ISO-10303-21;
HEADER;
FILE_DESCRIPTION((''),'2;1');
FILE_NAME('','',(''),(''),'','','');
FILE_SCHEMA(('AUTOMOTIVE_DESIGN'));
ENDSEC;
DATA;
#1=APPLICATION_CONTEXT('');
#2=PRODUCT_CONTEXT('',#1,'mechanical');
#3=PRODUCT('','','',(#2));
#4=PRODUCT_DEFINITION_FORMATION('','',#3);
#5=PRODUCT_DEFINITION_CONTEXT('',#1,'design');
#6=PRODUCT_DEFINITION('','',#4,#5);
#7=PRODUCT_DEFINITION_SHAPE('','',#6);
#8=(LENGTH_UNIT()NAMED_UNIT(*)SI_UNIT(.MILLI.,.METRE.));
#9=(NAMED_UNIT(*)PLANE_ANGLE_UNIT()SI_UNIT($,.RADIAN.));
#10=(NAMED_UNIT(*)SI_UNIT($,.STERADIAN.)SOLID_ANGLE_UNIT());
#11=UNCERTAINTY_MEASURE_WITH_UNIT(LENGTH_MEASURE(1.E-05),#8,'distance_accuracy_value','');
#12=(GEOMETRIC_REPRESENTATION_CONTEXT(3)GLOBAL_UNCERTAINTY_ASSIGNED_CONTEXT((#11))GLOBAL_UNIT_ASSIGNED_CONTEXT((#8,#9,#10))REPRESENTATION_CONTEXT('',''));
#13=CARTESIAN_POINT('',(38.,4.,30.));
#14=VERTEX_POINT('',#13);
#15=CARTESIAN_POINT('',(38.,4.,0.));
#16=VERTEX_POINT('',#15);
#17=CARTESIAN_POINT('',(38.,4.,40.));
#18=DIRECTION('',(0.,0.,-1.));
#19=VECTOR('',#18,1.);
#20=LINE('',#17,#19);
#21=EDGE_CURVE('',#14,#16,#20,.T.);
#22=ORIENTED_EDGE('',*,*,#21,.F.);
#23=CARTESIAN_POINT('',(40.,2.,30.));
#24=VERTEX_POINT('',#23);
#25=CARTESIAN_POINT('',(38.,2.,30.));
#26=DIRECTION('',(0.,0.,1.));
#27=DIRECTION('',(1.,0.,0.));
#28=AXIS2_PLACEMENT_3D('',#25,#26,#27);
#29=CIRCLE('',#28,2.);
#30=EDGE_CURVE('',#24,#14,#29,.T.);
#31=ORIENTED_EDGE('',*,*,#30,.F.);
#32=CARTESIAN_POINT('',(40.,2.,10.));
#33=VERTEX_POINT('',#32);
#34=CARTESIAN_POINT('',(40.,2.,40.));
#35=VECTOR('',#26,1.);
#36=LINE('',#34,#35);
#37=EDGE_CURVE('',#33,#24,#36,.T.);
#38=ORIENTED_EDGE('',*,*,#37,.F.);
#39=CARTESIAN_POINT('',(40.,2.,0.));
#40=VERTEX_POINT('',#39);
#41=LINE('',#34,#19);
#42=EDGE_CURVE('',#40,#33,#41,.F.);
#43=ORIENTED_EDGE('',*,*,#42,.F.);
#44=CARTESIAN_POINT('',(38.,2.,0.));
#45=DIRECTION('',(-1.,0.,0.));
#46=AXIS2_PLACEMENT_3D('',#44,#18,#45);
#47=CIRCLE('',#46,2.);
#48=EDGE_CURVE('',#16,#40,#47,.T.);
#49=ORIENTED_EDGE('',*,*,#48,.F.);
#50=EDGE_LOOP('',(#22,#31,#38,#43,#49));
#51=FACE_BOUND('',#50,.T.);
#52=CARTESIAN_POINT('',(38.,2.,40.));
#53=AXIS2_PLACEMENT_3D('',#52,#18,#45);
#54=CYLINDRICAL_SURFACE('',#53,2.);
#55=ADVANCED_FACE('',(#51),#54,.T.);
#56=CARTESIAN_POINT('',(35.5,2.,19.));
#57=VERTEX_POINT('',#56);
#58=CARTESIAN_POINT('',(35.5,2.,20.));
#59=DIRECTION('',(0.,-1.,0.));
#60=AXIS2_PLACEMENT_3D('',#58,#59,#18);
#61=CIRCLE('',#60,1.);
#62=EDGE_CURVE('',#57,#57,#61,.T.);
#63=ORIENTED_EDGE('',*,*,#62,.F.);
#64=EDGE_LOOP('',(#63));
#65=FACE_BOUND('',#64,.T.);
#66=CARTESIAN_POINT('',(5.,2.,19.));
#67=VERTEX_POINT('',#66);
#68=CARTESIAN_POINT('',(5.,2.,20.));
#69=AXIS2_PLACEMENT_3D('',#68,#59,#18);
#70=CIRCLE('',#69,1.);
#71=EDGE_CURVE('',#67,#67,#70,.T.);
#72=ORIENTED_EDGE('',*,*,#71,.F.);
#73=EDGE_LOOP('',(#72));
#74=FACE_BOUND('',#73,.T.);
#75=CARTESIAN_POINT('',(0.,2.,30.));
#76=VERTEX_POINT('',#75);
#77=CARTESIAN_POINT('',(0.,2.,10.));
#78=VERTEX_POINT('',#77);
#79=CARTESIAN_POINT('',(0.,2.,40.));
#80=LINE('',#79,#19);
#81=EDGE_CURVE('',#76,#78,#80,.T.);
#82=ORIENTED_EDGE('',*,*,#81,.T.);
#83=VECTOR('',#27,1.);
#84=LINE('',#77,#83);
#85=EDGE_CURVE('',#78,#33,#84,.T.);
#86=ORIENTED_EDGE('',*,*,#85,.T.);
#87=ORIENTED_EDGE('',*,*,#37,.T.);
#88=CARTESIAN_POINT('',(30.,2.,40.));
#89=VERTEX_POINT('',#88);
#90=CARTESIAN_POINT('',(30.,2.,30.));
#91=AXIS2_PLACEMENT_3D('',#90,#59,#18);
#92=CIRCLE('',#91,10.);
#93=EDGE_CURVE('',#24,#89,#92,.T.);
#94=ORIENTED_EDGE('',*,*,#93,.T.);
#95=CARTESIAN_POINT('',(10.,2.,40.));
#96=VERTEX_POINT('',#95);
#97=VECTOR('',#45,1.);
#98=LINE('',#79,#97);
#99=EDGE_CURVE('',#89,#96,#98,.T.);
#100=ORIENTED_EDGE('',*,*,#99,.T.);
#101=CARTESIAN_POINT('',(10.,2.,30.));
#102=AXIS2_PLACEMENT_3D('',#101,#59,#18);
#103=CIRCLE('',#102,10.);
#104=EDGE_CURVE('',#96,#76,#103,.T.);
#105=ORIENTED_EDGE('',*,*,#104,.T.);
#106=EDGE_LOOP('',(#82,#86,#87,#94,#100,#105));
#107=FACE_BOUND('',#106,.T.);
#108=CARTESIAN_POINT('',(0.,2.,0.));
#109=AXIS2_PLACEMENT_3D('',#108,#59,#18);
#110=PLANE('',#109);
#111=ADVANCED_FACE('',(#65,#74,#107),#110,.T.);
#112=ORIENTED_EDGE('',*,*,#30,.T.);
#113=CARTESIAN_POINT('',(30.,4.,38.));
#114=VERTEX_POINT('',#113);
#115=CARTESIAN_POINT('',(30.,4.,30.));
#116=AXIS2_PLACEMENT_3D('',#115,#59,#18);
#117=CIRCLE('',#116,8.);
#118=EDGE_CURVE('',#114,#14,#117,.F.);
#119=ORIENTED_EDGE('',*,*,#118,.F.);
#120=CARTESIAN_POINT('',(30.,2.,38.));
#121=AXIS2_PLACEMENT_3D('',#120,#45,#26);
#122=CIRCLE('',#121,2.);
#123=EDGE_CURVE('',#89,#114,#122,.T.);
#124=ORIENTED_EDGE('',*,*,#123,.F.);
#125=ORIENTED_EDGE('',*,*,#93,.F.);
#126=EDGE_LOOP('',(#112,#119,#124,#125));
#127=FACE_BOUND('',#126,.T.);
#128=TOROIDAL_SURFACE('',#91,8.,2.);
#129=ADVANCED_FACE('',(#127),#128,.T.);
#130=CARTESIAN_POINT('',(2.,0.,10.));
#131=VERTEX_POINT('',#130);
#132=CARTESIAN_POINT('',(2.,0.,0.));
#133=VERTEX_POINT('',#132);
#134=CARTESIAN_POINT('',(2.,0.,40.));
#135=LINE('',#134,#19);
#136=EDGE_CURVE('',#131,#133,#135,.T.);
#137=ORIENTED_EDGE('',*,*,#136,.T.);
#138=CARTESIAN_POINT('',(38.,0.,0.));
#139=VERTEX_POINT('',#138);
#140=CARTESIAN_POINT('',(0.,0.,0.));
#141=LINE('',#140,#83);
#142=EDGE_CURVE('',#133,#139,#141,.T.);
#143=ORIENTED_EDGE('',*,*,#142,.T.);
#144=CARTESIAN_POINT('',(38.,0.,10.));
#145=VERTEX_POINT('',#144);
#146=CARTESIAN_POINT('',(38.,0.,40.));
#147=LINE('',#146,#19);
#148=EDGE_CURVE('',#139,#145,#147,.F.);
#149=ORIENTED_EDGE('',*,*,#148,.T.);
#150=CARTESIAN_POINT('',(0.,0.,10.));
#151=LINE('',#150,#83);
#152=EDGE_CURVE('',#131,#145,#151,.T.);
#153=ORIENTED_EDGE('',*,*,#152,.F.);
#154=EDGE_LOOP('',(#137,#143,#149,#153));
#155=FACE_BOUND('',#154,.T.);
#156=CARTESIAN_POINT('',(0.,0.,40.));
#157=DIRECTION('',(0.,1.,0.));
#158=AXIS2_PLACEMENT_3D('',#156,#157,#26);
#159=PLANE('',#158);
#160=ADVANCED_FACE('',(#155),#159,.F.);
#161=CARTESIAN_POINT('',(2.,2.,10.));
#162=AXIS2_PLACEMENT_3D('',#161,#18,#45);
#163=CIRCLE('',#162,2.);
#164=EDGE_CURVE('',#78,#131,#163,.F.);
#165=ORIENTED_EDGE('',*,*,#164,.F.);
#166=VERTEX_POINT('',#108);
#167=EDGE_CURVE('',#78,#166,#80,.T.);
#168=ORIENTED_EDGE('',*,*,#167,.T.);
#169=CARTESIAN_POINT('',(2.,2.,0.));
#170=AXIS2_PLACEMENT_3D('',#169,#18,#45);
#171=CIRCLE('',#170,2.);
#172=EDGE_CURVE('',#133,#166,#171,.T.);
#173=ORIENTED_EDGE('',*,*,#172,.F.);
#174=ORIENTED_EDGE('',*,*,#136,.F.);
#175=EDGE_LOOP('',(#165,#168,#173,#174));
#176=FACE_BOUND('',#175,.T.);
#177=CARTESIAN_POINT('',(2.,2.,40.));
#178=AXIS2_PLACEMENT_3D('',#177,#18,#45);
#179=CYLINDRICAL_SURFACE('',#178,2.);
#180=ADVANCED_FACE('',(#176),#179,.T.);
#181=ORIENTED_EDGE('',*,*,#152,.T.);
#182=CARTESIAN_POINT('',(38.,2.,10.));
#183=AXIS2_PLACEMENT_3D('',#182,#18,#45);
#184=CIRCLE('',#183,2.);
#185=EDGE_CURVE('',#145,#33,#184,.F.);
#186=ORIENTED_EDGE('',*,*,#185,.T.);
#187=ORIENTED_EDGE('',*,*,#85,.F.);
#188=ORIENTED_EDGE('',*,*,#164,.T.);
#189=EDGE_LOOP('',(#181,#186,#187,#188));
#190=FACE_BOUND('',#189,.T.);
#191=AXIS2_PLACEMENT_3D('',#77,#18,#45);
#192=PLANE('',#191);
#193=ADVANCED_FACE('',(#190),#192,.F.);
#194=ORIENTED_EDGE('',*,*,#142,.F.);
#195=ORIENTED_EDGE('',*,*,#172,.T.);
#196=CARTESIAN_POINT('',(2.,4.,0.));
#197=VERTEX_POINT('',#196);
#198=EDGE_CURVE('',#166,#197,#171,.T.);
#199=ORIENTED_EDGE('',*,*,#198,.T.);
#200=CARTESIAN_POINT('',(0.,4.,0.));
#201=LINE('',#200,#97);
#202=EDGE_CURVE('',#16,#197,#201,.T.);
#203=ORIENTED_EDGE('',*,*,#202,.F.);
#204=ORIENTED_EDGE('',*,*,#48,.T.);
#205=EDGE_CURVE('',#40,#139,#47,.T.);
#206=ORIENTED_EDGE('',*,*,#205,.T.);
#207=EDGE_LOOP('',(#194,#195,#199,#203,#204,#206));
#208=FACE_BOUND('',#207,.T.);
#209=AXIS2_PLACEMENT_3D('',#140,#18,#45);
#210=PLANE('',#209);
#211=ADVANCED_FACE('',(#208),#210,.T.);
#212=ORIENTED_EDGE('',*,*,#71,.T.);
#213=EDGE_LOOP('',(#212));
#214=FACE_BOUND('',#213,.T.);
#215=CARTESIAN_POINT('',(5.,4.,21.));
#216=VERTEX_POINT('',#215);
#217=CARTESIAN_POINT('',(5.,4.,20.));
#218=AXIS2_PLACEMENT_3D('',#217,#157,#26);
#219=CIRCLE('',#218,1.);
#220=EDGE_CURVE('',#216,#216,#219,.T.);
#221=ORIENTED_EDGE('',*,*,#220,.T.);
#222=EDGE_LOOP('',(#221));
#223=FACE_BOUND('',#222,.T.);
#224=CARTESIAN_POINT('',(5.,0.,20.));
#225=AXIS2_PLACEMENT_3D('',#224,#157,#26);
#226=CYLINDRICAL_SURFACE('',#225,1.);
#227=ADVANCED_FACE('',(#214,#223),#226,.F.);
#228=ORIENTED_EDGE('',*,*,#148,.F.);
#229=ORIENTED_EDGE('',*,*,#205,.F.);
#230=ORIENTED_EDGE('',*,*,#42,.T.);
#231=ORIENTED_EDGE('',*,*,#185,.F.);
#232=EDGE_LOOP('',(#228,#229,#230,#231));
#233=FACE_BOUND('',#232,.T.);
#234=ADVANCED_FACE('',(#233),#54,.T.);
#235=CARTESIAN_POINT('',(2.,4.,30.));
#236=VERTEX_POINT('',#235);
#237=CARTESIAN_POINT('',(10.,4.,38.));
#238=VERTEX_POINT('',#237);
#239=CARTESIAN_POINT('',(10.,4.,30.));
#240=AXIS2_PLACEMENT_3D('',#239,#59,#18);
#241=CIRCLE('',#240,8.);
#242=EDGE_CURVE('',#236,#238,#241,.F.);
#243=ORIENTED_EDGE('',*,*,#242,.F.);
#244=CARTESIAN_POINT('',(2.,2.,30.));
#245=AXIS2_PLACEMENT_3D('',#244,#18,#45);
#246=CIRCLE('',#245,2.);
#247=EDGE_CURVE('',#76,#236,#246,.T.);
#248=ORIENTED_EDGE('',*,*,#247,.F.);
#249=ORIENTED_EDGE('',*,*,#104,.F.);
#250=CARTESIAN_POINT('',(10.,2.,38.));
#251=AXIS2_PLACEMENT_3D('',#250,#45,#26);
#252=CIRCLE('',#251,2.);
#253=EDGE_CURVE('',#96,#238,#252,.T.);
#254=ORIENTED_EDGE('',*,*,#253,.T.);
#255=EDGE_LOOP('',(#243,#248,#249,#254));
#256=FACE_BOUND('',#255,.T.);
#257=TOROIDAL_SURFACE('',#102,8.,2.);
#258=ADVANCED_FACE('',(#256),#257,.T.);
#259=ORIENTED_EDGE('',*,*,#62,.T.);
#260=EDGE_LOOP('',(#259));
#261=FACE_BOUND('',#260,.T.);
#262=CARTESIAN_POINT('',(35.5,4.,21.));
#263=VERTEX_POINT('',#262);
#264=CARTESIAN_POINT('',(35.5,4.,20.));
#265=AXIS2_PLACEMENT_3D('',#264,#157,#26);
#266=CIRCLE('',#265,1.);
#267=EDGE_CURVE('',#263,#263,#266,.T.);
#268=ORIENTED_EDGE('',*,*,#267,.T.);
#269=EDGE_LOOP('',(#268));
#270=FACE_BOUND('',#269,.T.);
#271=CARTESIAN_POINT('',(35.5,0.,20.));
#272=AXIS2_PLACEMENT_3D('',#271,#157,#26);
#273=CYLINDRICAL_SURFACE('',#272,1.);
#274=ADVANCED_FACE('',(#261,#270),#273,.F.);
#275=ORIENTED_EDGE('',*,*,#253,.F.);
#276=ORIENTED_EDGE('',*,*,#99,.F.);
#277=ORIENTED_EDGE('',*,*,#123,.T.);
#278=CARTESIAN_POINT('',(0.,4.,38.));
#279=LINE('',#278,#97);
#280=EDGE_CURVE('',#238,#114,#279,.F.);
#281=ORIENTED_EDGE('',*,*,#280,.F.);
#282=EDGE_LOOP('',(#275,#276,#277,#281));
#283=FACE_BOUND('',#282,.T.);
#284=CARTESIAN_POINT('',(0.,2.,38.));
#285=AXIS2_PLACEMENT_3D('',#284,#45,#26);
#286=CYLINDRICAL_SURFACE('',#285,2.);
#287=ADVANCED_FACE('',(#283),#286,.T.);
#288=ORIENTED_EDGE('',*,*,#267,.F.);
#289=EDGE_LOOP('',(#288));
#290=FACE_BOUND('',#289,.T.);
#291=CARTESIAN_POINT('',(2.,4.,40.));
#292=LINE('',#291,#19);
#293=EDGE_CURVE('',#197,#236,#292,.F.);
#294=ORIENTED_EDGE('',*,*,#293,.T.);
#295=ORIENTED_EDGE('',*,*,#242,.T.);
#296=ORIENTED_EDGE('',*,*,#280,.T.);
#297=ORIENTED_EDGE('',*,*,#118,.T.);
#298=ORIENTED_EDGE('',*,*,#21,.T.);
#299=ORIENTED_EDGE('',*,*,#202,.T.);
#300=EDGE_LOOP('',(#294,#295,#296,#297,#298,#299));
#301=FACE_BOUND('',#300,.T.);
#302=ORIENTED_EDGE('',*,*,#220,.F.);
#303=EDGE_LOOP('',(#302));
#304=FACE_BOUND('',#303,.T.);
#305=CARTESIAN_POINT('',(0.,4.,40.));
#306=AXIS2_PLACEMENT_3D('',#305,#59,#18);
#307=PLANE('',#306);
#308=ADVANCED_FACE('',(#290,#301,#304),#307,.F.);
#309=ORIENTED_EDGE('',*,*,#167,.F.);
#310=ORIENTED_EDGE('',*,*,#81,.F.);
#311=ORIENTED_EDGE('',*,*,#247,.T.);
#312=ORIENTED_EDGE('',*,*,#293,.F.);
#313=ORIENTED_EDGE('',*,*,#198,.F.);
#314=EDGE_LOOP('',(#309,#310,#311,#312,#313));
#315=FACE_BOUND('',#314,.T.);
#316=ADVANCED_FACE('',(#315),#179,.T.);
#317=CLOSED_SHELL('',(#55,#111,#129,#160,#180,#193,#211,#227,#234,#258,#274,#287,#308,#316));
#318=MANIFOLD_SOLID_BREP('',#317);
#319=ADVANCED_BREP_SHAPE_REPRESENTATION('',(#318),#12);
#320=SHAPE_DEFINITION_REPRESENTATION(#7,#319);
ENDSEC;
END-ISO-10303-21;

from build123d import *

# Parameters (mm, degrees)
SKETCH_1_W          = 40
SKETCH_1_H          = 4
EXTRUDE_1_DEPTH     = 40
SKETCH_3_W          = 40
SKETCH_3_H          = 30
CUT_EXTRUDE_1_DEPTH = 2
SKETCH_4_R          = 1
CUT_EXTRUDE_2_DEPTH = 4
SKETCH_6_R          = 1
CUT_EXTRUDE_3_DEPTH = 4
FILLET_4_R          = 10
FILLET_5_R          = 10
FILLET_6_R          = 2
FILLET_7_R          = 2
FILLET_8_R          = 2


with BuildPart() as part:
    # ｽｹｯﾁ1 → ﾎﾞｽ - 押し出し1 (new body)
    with BuildSketch(Plane.XY):
        with Locations((20, 2)):
            Rectangle(SKETCH_1_W, SKETCH_1_H)
    extrude(amount=EXTRUDE_1_DEPTH)

    # ｽｹｯﾁ3 → ｶｯﾄ - 押し出し1 (cut)
    with BuildSketch(Plane.XZ):
        with Locations((20, 25)):
            Rectangle(SKETCH_3_W, SKETCH_3_H)
    extrude(amount=-CUT_EXTRUDE_1_DEPTH, mode=Mode.SUBTRACT)

    # ｽｹｯﾁ4 → ｶｯﾄ - 押し出し2 (cut)
    with BuildSketch(Plane(origin=(0, 4, 0), x_dir=(1, 0, 0), z_dir=(0, 1, 0))):
        with Locations(Location((35.5, -20, 0), (0, 0, 270))):
            Circle(SKETCH_4_R)
    extrude(amount=-CUT_EXTRUDE_2_DEPTH, mode=Mode.SUBTRACT)

    # ｽｹｯﾁ6 → ｶｯﾄ - 押し出し3 (cut)
    with BuildSketch(Plane(origin=(0, 4, 0), x_dir=(1, 0, 0), z_dir=(0, 1, 0))):
        with Locations(Location((5, -20, 0), (0, 0, 270))):
            Circle(SKETCH_6_R)
    extrude(amount=-CUT_EXTRUDE_3_DEPTH, mode=Mode.SUBTRACT)

    # ﾌｨﾚｯﾄ4
    fillet_4_edges = [part.edges().sort_by_distance(p)[0] for p in [
        (40, 3, 40),
    ]]
    fillet(fillet_4_edges, radius=FILLET_4_R)

    # ﾌｨﾚｯﾄ5
    fillet_5_edges = [part.edges().sort_by_distance(p)[0] for p in [
        (0, 3, 40),
    ]]
    fillet(fillet_5_edges, radius=FILLET_5_R)

    # ﾌｨﾚｯﾄ6
    fillet_6_edges = [part.edges().sort_by_distance(p)[0] for p in [
        (0, 4, 15),
        (2.928932188, 4, 37.071067812),
        (20, 4, 40),
        (37.071067812, 4, 37.071067812),
        (40, 4, 15),
    ]]
    fillet(fillet_6_edges, radius=FILLET_6_R - 0.0001)  # a hair under: the kernel refuses the full size

    # ﾌｨﾚｯﾄ7
    fillet_7_edges = [part.edges().sort_by_distance(p)[0] for p in [
        (40, 0, 5),
    ]]
    fillet(fillet_7_edges, radius=FILLET_7_R)

    # ﾌｨﾚｯﾄ8
    fillet_8_edges = [part.edges().sort_by_distance(p)[0] for p in [
        (0, 0, 5),
    ]]
    fillet(fillet_8_edges, radius=FILLET_8_R)


solid = part.part
